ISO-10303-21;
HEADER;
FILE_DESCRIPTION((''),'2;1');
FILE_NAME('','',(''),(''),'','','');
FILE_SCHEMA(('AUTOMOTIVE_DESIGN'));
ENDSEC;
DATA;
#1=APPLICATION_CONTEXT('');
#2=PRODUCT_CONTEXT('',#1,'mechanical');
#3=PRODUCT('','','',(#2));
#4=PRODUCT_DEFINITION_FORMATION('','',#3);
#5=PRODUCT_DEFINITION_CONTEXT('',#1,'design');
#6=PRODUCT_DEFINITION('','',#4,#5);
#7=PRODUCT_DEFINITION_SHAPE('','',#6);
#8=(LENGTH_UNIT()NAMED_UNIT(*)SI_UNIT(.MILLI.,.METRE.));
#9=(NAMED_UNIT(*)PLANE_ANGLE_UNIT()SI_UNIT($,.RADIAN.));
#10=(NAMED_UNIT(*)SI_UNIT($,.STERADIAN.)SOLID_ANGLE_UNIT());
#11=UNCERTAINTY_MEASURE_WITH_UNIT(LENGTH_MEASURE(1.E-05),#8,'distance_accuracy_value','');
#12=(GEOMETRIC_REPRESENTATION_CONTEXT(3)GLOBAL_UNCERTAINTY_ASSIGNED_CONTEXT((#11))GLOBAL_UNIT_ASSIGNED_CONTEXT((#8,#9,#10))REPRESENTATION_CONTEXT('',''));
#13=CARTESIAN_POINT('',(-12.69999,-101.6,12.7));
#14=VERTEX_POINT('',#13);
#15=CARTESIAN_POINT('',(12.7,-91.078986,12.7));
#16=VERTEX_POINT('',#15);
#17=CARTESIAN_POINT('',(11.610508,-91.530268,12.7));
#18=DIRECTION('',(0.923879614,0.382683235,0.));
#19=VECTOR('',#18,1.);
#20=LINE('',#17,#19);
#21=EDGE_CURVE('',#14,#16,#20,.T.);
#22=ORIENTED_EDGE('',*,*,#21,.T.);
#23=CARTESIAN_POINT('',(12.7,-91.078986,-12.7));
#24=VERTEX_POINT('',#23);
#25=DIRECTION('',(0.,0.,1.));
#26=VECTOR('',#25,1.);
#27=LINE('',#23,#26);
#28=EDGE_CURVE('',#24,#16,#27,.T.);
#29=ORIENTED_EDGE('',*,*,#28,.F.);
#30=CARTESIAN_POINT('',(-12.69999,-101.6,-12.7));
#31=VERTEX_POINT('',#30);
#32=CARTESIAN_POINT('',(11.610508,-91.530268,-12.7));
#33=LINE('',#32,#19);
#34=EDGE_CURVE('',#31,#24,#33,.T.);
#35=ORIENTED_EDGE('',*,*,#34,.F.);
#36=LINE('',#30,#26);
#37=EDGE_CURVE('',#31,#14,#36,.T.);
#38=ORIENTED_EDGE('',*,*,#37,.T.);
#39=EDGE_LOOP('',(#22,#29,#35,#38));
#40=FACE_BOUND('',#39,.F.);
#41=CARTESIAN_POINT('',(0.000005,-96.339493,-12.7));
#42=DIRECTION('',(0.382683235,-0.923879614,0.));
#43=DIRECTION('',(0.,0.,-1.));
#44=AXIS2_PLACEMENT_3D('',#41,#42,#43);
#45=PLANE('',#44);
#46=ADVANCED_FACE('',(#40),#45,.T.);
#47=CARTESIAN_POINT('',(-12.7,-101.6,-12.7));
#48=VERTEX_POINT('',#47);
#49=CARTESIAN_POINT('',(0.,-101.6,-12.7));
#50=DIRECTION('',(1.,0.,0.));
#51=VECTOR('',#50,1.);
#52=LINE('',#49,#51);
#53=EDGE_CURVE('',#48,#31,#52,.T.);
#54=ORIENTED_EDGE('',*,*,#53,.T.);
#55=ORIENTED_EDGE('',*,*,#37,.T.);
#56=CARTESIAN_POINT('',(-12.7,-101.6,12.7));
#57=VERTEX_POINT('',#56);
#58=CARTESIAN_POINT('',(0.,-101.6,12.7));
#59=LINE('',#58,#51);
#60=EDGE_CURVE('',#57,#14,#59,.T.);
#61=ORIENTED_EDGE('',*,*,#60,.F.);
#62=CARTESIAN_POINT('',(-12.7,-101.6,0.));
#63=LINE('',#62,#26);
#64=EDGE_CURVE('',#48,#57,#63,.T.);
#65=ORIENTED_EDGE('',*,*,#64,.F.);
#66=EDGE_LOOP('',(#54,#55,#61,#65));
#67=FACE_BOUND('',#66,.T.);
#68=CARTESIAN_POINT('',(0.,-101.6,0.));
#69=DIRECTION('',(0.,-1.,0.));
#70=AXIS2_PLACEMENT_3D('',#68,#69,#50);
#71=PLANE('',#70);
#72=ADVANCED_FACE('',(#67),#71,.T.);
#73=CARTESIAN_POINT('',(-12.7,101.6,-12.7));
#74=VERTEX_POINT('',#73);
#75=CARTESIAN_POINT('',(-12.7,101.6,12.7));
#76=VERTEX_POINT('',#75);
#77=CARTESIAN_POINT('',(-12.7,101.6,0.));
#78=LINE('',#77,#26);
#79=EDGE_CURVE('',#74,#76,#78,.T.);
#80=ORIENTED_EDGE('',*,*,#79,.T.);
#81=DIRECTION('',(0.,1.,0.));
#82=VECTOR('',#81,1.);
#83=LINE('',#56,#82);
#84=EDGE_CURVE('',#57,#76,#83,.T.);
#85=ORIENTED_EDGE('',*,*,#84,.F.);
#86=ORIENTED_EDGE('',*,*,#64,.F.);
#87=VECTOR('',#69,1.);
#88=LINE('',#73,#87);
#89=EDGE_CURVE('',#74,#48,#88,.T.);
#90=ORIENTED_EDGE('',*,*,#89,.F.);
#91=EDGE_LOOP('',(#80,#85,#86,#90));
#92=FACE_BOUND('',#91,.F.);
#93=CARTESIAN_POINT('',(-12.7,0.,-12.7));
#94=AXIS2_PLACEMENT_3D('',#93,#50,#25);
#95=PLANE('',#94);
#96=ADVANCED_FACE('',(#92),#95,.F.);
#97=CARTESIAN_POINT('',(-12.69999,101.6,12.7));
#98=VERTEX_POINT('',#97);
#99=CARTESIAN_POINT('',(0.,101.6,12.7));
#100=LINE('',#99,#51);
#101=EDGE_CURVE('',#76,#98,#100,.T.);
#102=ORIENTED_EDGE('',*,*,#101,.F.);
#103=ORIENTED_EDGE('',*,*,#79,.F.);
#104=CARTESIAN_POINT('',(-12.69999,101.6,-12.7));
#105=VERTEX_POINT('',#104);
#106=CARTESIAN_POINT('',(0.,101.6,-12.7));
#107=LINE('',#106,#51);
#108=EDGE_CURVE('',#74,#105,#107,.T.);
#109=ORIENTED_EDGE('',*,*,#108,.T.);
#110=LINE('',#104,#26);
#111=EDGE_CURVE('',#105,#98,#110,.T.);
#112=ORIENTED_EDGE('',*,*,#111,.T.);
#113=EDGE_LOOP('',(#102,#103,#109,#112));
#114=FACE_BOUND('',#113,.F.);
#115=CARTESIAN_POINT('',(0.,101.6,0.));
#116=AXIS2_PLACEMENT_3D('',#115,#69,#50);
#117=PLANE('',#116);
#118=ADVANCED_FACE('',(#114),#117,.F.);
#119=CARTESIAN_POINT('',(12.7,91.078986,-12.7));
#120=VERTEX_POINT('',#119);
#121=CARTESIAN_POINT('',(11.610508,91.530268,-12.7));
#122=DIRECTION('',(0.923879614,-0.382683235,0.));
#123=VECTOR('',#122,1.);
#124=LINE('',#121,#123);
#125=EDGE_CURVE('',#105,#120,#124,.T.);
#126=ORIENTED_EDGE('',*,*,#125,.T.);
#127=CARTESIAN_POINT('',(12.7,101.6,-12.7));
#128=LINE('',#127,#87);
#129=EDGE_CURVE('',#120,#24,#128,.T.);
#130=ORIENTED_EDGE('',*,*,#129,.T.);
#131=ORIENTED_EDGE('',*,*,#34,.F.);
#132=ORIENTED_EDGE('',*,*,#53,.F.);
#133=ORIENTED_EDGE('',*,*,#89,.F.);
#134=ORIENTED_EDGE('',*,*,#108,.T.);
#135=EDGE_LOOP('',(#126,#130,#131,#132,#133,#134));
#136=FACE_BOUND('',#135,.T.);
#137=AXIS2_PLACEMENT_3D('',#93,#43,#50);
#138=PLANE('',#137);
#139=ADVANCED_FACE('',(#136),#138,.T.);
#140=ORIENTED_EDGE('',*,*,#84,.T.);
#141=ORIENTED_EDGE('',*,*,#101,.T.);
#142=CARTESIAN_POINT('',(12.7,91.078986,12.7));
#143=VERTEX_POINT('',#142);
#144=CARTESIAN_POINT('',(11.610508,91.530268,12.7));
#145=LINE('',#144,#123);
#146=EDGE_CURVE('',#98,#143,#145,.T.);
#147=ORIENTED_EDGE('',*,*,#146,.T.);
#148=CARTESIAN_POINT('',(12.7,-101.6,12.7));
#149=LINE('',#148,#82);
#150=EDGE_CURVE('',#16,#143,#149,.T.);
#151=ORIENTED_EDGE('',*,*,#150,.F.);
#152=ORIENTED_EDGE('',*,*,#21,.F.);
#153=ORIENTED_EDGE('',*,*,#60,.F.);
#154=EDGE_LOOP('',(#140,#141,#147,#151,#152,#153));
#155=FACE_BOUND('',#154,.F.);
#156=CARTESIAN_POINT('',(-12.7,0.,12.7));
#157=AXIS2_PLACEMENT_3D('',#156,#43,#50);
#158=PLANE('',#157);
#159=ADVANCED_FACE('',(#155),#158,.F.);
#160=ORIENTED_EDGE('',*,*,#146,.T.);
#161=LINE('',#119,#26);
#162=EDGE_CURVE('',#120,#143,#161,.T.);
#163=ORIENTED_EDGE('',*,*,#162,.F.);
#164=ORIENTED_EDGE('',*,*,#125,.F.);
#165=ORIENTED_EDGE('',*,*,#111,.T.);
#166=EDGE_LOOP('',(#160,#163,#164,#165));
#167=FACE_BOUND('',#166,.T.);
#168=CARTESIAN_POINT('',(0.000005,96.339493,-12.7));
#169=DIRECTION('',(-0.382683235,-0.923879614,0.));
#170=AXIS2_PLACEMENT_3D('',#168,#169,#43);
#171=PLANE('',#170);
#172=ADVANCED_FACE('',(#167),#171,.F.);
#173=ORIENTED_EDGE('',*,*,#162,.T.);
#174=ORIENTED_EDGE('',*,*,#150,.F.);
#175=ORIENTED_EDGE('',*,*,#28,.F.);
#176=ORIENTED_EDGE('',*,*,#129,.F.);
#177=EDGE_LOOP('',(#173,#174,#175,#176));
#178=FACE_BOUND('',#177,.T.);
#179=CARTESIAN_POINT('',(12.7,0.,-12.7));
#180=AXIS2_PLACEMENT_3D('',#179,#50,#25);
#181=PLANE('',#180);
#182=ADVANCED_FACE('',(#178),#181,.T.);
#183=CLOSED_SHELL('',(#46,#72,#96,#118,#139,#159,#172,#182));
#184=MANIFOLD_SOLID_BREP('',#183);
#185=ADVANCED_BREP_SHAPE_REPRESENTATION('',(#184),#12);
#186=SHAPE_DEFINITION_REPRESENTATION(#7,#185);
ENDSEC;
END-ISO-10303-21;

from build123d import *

# Parameters (mm, degrees)
F0_W       = 25.4
F0_H       = 25.4
F1_DEPTH   = 101.6
F2_SIZE2   = 10.521014
F2_SIZE    = 25.39999
F2_2_SIZE2 = 10.521014
F2_2_SIZE  = 25.39999


# Not quite as in the source:
# - a fillet or chamfer is up to 0.001 mm smaller than in the source, because OpenCascade refuses the exact size


with BuildPart() as f1:
    # F0 (on Front) → F1 (new body, symmetric)
    with BuildSketch(Plane.XZ):
        Rectangle(F0_W, F0_H)
    extrude(amount=F1_DEPTH, both=True)

    # F2 (size 25.4 and 10.5210244843 in the source; OpenCascade refuses exactly that, so slightly less here)
    f2_edges = [f1.edges().sort_by_distance(p)[0] for p in [
        (12.7, -101.6, 0),
    ]]
    f2_side = f1.faces().sort_by_distance((0, -101.6, 0))[0]
    chamfer(f2_edges, length=F2_SIZE, length2=F2_SIZE2, reference=f2_side)

    # F2#2 (size 25.4 and 10.5210244843 in the source; OpenCascade refuses exactly that, so slightly less here)
    f2_2_edges = [f1.edges().sort_by_distance(p)[0] for p in [
        (12.7, 101.6, 0),
    ]]
    f2_2_side = f1.faces().sort_by_distance((0, 101.6, 0))[0]
    chamfer(f2_2_edges, length=F2_2_SIZE, length2=F2_2_SIZE2, reference=f2_2_side)


solid = f1.part
